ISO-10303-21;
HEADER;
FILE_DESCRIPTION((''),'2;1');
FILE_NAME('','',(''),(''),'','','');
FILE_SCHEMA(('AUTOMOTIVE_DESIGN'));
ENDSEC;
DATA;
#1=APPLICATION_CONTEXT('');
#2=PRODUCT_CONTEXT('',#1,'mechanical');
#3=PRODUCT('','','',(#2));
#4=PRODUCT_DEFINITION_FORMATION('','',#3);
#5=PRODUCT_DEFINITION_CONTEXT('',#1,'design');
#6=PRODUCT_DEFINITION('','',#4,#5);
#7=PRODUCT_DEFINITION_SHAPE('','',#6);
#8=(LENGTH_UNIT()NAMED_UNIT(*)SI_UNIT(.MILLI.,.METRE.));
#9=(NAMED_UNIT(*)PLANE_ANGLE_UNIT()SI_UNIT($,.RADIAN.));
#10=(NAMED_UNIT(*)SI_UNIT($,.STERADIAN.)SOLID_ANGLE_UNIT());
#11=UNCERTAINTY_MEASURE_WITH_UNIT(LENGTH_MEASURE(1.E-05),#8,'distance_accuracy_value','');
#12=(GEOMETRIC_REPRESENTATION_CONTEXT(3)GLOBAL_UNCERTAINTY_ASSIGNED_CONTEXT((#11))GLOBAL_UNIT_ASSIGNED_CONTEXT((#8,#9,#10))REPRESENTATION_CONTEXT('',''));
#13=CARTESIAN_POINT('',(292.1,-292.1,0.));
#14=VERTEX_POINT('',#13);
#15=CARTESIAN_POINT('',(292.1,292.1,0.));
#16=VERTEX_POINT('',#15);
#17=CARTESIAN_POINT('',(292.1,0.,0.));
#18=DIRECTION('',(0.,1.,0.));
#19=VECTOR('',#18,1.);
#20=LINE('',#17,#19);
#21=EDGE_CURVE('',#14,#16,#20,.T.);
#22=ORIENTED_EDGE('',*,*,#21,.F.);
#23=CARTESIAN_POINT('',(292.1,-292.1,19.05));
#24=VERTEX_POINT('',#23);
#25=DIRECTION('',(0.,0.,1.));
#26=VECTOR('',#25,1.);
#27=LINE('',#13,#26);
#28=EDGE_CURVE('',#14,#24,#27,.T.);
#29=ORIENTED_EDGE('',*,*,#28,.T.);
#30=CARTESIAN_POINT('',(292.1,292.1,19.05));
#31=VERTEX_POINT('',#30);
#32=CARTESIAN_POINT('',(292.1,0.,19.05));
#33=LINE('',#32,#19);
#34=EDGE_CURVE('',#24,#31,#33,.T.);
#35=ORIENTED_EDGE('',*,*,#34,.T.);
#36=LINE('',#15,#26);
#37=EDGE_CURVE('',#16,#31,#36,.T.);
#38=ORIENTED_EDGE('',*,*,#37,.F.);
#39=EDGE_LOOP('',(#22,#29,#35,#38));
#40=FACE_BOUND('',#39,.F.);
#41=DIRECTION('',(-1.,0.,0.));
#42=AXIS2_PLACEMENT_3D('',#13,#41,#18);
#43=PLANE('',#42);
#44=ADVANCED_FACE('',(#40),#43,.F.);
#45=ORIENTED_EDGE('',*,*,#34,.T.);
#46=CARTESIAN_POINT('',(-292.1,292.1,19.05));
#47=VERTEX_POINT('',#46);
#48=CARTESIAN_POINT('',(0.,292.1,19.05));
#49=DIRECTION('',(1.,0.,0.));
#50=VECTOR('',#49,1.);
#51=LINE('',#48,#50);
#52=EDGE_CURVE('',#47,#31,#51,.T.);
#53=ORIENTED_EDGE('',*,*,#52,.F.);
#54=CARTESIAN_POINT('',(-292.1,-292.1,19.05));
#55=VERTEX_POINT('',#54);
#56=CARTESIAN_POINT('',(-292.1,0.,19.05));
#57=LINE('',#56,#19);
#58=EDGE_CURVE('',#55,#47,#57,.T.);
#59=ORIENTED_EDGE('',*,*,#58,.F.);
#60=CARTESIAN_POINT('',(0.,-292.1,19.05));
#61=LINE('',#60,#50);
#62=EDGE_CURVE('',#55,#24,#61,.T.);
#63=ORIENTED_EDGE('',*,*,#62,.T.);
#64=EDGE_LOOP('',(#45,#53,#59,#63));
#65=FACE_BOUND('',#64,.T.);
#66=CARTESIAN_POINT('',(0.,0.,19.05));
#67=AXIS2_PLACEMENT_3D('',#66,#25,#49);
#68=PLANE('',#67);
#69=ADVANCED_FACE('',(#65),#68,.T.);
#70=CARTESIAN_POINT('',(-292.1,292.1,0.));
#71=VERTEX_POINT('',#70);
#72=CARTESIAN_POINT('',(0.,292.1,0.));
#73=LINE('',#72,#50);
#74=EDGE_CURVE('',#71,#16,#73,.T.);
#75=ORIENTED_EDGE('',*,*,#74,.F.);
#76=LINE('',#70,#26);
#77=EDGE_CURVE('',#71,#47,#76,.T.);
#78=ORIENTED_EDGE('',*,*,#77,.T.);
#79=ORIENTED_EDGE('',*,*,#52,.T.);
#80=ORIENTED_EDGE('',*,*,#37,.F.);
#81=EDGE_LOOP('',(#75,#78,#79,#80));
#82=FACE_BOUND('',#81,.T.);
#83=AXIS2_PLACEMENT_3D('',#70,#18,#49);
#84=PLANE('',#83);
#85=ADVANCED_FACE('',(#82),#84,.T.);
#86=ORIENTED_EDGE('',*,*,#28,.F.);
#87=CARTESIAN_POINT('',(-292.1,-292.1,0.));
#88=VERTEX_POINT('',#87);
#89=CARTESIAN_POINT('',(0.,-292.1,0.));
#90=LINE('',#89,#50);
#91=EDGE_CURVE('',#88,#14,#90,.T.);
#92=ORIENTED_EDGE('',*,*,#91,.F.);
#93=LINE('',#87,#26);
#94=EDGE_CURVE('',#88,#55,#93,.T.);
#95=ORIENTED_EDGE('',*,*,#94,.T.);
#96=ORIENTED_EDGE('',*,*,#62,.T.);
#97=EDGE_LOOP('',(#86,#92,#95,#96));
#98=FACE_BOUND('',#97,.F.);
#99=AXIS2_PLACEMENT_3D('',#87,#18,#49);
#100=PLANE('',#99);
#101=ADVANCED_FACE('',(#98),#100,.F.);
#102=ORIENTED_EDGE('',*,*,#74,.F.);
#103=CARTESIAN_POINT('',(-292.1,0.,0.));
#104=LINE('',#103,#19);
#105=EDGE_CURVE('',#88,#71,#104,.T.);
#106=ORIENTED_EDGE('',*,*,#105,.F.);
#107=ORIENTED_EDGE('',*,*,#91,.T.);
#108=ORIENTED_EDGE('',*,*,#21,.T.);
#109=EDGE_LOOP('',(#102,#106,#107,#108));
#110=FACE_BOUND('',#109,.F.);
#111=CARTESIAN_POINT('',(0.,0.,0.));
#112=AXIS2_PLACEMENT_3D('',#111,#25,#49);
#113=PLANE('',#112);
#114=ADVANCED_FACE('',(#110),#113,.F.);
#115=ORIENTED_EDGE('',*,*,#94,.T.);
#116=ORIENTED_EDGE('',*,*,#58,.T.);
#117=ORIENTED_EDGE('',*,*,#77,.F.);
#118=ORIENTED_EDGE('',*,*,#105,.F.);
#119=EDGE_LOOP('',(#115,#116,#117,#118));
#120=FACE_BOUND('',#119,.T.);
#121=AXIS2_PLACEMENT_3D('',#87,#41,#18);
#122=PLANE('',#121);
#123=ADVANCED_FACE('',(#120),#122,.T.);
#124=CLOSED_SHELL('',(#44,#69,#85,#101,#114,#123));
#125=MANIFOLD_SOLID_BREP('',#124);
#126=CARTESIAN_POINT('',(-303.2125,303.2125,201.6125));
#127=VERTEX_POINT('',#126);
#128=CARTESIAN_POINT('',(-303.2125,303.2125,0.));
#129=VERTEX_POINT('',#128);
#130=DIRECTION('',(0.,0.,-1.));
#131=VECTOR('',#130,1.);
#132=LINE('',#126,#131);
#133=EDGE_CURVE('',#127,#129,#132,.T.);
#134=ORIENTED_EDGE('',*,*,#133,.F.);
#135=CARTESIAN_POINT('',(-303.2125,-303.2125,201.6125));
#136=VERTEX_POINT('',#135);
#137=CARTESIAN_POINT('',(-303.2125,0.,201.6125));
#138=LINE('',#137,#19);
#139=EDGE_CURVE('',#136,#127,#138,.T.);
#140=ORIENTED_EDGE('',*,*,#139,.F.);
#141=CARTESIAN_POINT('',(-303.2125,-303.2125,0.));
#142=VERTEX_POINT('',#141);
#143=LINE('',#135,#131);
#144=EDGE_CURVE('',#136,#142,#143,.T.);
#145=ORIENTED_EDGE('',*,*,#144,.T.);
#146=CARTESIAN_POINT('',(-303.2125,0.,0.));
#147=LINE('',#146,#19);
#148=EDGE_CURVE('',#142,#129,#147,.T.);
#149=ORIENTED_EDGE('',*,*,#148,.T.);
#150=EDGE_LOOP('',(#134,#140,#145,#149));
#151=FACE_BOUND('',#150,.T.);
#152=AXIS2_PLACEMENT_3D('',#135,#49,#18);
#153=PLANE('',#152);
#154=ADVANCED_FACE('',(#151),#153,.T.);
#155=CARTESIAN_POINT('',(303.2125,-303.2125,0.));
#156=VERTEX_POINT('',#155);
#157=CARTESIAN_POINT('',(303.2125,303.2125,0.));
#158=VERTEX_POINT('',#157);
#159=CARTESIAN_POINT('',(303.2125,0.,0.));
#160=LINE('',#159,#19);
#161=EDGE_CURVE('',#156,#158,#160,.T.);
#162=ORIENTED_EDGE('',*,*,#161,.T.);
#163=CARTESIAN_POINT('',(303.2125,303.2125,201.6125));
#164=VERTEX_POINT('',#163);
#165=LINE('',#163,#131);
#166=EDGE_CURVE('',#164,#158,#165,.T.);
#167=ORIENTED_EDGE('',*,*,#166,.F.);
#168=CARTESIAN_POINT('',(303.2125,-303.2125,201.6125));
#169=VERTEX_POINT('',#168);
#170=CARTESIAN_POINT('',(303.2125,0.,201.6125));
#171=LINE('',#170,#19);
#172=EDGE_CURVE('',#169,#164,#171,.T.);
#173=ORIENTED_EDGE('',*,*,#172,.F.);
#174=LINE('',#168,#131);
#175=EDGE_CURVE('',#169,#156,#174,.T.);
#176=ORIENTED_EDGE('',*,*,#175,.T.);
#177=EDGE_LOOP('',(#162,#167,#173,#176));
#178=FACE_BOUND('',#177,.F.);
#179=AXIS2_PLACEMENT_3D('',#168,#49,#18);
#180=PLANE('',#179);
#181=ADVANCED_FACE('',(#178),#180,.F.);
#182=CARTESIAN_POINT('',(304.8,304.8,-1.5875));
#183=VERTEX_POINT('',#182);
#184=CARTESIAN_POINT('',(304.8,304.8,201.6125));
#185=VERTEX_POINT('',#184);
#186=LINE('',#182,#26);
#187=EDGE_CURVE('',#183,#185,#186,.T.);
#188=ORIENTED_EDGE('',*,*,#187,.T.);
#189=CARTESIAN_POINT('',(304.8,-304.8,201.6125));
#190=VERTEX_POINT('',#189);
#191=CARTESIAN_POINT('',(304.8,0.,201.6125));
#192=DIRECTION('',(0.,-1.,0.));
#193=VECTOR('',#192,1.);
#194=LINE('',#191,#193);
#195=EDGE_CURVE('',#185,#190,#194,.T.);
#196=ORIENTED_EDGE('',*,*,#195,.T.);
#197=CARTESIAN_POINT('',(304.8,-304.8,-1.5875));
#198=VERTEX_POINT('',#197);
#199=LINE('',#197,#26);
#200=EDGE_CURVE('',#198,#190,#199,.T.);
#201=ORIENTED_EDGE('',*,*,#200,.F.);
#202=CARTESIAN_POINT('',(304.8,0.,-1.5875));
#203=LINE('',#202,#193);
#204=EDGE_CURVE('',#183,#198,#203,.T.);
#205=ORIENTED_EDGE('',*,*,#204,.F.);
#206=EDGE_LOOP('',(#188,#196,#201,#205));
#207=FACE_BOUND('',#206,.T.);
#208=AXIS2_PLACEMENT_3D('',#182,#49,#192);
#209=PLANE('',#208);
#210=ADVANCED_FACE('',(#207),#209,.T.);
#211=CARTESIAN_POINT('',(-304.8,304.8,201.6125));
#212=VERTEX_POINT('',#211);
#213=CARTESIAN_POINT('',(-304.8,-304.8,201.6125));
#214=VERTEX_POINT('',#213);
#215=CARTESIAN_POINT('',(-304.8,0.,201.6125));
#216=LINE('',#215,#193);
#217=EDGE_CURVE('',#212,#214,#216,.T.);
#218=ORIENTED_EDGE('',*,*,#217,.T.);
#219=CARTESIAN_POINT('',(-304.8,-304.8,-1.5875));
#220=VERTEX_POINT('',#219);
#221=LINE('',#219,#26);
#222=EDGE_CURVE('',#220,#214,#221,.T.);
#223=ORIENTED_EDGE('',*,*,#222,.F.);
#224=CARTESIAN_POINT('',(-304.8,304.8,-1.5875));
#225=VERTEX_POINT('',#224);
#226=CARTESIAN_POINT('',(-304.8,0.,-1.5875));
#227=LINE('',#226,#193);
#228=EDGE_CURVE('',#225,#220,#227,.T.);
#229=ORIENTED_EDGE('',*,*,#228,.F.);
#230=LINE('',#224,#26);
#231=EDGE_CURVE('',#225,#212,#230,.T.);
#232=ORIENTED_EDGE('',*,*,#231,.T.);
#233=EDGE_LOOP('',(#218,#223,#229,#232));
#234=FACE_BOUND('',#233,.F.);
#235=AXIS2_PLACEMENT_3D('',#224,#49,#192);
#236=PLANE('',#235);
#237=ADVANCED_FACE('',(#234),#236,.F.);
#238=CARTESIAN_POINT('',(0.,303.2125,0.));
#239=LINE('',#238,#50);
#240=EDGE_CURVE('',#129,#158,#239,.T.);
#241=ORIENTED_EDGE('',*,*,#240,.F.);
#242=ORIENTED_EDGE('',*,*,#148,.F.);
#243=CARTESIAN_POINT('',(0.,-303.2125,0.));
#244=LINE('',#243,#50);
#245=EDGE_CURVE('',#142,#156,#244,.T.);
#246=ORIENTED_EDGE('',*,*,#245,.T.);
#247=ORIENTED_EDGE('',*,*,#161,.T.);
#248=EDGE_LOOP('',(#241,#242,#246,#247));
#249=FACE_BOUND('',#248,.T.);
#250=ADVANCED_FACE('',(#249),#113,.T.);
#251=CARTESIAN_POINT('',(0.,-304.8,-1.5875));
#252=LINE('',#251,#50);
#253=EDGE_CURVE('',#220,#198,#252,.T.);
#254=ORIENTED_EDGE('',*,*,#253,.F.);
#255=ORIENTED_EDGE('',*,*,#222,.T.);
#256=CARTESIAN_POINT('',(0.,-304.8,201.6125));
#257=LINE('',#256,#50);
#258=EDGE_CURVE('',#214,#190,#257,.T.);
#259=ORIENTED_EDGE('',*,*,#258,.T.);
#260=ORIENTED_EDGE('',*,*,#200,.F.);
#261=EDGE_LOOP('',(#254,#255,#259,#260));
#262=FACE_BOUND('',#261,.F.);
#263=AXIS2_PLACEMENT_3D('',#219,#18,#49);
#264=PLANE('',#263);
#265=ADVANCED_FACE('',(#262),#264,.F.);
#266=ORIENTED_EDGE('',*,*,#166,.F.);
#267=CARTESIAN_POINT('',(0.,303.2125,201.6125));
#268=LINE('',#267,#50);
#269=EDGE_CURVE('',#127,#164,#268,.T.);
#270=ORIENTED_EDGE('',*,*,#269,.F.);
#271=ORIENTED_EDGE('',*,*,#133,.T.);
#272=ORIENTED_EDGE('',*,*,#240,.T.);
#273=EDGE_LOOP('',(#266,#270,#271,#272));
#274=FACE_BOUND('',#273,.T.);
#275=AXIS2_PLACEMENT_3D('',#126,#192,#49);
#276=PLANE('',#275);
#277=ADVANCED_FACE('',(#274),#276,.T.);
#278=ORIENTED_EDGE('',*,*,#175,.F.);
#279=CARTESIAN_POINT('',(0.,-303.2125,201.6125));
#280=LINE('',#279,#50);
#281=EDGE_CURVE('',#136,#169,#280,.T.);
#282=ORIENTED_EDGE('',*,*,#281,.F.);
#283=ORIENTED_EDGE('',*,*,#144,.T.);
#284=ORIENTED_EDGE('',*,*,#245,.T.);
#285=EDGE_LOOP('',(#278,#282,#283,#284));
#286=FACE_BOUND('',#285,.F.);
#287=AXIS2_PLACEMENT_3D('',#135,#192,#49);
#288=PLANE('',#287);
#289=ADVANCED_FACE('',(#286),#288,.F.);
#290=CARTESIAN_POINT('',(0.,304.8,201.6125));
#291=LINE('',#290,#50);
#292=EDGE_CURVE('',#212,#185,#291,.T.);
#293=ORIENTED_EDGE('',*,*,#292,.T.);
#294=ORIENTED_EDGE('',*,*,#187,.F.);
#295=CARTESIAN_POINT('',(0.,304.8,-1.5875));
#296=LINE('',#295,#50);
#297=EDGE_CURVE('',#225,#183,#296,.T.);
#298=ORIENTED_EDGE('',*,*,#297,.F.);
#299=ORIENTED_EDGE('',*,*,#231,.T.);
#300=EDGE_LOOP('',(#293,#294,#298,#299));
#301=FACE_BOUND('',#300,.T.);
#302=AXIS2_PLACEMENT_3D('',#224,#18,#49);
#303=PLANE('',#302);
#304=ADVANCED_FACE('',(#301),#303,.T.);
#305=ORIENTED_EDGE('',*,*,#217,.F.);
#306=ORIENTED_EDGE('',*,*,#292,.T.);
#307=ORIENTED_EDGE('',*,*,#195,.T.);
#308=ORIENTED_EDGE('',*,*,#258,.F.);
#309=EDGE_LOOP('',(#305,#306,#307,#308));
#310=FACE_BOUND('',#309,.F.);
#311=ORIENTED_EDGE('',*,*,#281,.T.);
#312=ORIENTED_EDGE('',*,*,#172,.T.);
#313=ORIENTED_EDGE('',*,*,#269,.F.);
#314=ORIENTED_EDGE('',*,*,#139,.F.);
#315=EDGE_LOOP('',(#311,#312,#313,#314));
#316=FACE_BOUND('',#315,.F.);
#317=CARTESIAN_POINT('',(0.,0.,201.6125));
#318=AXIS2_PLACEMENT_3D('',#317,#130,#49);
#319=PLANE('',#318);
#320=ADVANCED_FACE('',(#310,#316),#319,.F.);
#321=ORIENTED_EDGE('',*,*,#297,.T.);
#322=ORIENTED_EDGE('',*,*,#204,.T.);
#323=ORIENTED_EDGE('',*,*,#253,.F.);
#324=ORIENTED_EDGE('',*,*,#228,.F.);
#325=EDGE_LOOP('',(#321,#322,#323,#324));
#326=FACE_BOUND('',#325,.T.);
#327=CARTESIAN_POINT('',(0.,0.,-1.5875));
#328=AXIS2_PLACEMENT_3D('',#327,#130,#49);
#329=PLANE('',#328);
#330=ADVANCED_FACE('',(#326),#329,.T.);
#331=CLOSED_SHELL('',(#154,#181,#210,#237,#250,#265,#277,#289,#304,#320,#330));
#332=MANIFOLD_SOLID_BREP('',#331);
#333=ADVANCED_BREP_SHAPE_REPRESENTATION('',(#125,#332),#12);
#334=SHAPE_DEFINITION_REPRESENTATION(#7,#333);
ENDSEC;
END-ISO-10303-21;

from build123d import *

# Parameters (mm, degrees)
F0_W     = 584.2
F0_H     = 584.2
F1_DEPTH = 19.05
F3_W     = 609.6
F3_H     = 609.6
F4_DEPTH = 203.2
F5_W     = 606.425
F5_H     = 606.425
F6_DEPTH = 201.6125


with BuildPart() as f1:
    # F0 (on Top) → F1 (new body)
    with BuildSketch(Plane.XY):
        Rectangle(F0_W, F0_H)
    extrude(amount=F1_DEPTH)


with BuildPart() as f4:
    # F3 (on offset) → F4 (new body)
    with BuildSketch(Plane(origin=(0, 0, -1.5875), x_dir=(1, 0, 0), z_dir=(0, 0, -1))):
        Rectangle(F3_W, F3_H)
    extrude(amount=-F4_DEPTH)

    # F5 (on face) → F6 (cut, through all)
    with BuildSketch(Plane.XY.offset(201.6125)):
        Rectangle(F5_W, F5_H)
    extrude(amount=-F6_DEPTH, mode=Mode.SUBTRACT)


solid = Compound([f1.part, f4.part])
